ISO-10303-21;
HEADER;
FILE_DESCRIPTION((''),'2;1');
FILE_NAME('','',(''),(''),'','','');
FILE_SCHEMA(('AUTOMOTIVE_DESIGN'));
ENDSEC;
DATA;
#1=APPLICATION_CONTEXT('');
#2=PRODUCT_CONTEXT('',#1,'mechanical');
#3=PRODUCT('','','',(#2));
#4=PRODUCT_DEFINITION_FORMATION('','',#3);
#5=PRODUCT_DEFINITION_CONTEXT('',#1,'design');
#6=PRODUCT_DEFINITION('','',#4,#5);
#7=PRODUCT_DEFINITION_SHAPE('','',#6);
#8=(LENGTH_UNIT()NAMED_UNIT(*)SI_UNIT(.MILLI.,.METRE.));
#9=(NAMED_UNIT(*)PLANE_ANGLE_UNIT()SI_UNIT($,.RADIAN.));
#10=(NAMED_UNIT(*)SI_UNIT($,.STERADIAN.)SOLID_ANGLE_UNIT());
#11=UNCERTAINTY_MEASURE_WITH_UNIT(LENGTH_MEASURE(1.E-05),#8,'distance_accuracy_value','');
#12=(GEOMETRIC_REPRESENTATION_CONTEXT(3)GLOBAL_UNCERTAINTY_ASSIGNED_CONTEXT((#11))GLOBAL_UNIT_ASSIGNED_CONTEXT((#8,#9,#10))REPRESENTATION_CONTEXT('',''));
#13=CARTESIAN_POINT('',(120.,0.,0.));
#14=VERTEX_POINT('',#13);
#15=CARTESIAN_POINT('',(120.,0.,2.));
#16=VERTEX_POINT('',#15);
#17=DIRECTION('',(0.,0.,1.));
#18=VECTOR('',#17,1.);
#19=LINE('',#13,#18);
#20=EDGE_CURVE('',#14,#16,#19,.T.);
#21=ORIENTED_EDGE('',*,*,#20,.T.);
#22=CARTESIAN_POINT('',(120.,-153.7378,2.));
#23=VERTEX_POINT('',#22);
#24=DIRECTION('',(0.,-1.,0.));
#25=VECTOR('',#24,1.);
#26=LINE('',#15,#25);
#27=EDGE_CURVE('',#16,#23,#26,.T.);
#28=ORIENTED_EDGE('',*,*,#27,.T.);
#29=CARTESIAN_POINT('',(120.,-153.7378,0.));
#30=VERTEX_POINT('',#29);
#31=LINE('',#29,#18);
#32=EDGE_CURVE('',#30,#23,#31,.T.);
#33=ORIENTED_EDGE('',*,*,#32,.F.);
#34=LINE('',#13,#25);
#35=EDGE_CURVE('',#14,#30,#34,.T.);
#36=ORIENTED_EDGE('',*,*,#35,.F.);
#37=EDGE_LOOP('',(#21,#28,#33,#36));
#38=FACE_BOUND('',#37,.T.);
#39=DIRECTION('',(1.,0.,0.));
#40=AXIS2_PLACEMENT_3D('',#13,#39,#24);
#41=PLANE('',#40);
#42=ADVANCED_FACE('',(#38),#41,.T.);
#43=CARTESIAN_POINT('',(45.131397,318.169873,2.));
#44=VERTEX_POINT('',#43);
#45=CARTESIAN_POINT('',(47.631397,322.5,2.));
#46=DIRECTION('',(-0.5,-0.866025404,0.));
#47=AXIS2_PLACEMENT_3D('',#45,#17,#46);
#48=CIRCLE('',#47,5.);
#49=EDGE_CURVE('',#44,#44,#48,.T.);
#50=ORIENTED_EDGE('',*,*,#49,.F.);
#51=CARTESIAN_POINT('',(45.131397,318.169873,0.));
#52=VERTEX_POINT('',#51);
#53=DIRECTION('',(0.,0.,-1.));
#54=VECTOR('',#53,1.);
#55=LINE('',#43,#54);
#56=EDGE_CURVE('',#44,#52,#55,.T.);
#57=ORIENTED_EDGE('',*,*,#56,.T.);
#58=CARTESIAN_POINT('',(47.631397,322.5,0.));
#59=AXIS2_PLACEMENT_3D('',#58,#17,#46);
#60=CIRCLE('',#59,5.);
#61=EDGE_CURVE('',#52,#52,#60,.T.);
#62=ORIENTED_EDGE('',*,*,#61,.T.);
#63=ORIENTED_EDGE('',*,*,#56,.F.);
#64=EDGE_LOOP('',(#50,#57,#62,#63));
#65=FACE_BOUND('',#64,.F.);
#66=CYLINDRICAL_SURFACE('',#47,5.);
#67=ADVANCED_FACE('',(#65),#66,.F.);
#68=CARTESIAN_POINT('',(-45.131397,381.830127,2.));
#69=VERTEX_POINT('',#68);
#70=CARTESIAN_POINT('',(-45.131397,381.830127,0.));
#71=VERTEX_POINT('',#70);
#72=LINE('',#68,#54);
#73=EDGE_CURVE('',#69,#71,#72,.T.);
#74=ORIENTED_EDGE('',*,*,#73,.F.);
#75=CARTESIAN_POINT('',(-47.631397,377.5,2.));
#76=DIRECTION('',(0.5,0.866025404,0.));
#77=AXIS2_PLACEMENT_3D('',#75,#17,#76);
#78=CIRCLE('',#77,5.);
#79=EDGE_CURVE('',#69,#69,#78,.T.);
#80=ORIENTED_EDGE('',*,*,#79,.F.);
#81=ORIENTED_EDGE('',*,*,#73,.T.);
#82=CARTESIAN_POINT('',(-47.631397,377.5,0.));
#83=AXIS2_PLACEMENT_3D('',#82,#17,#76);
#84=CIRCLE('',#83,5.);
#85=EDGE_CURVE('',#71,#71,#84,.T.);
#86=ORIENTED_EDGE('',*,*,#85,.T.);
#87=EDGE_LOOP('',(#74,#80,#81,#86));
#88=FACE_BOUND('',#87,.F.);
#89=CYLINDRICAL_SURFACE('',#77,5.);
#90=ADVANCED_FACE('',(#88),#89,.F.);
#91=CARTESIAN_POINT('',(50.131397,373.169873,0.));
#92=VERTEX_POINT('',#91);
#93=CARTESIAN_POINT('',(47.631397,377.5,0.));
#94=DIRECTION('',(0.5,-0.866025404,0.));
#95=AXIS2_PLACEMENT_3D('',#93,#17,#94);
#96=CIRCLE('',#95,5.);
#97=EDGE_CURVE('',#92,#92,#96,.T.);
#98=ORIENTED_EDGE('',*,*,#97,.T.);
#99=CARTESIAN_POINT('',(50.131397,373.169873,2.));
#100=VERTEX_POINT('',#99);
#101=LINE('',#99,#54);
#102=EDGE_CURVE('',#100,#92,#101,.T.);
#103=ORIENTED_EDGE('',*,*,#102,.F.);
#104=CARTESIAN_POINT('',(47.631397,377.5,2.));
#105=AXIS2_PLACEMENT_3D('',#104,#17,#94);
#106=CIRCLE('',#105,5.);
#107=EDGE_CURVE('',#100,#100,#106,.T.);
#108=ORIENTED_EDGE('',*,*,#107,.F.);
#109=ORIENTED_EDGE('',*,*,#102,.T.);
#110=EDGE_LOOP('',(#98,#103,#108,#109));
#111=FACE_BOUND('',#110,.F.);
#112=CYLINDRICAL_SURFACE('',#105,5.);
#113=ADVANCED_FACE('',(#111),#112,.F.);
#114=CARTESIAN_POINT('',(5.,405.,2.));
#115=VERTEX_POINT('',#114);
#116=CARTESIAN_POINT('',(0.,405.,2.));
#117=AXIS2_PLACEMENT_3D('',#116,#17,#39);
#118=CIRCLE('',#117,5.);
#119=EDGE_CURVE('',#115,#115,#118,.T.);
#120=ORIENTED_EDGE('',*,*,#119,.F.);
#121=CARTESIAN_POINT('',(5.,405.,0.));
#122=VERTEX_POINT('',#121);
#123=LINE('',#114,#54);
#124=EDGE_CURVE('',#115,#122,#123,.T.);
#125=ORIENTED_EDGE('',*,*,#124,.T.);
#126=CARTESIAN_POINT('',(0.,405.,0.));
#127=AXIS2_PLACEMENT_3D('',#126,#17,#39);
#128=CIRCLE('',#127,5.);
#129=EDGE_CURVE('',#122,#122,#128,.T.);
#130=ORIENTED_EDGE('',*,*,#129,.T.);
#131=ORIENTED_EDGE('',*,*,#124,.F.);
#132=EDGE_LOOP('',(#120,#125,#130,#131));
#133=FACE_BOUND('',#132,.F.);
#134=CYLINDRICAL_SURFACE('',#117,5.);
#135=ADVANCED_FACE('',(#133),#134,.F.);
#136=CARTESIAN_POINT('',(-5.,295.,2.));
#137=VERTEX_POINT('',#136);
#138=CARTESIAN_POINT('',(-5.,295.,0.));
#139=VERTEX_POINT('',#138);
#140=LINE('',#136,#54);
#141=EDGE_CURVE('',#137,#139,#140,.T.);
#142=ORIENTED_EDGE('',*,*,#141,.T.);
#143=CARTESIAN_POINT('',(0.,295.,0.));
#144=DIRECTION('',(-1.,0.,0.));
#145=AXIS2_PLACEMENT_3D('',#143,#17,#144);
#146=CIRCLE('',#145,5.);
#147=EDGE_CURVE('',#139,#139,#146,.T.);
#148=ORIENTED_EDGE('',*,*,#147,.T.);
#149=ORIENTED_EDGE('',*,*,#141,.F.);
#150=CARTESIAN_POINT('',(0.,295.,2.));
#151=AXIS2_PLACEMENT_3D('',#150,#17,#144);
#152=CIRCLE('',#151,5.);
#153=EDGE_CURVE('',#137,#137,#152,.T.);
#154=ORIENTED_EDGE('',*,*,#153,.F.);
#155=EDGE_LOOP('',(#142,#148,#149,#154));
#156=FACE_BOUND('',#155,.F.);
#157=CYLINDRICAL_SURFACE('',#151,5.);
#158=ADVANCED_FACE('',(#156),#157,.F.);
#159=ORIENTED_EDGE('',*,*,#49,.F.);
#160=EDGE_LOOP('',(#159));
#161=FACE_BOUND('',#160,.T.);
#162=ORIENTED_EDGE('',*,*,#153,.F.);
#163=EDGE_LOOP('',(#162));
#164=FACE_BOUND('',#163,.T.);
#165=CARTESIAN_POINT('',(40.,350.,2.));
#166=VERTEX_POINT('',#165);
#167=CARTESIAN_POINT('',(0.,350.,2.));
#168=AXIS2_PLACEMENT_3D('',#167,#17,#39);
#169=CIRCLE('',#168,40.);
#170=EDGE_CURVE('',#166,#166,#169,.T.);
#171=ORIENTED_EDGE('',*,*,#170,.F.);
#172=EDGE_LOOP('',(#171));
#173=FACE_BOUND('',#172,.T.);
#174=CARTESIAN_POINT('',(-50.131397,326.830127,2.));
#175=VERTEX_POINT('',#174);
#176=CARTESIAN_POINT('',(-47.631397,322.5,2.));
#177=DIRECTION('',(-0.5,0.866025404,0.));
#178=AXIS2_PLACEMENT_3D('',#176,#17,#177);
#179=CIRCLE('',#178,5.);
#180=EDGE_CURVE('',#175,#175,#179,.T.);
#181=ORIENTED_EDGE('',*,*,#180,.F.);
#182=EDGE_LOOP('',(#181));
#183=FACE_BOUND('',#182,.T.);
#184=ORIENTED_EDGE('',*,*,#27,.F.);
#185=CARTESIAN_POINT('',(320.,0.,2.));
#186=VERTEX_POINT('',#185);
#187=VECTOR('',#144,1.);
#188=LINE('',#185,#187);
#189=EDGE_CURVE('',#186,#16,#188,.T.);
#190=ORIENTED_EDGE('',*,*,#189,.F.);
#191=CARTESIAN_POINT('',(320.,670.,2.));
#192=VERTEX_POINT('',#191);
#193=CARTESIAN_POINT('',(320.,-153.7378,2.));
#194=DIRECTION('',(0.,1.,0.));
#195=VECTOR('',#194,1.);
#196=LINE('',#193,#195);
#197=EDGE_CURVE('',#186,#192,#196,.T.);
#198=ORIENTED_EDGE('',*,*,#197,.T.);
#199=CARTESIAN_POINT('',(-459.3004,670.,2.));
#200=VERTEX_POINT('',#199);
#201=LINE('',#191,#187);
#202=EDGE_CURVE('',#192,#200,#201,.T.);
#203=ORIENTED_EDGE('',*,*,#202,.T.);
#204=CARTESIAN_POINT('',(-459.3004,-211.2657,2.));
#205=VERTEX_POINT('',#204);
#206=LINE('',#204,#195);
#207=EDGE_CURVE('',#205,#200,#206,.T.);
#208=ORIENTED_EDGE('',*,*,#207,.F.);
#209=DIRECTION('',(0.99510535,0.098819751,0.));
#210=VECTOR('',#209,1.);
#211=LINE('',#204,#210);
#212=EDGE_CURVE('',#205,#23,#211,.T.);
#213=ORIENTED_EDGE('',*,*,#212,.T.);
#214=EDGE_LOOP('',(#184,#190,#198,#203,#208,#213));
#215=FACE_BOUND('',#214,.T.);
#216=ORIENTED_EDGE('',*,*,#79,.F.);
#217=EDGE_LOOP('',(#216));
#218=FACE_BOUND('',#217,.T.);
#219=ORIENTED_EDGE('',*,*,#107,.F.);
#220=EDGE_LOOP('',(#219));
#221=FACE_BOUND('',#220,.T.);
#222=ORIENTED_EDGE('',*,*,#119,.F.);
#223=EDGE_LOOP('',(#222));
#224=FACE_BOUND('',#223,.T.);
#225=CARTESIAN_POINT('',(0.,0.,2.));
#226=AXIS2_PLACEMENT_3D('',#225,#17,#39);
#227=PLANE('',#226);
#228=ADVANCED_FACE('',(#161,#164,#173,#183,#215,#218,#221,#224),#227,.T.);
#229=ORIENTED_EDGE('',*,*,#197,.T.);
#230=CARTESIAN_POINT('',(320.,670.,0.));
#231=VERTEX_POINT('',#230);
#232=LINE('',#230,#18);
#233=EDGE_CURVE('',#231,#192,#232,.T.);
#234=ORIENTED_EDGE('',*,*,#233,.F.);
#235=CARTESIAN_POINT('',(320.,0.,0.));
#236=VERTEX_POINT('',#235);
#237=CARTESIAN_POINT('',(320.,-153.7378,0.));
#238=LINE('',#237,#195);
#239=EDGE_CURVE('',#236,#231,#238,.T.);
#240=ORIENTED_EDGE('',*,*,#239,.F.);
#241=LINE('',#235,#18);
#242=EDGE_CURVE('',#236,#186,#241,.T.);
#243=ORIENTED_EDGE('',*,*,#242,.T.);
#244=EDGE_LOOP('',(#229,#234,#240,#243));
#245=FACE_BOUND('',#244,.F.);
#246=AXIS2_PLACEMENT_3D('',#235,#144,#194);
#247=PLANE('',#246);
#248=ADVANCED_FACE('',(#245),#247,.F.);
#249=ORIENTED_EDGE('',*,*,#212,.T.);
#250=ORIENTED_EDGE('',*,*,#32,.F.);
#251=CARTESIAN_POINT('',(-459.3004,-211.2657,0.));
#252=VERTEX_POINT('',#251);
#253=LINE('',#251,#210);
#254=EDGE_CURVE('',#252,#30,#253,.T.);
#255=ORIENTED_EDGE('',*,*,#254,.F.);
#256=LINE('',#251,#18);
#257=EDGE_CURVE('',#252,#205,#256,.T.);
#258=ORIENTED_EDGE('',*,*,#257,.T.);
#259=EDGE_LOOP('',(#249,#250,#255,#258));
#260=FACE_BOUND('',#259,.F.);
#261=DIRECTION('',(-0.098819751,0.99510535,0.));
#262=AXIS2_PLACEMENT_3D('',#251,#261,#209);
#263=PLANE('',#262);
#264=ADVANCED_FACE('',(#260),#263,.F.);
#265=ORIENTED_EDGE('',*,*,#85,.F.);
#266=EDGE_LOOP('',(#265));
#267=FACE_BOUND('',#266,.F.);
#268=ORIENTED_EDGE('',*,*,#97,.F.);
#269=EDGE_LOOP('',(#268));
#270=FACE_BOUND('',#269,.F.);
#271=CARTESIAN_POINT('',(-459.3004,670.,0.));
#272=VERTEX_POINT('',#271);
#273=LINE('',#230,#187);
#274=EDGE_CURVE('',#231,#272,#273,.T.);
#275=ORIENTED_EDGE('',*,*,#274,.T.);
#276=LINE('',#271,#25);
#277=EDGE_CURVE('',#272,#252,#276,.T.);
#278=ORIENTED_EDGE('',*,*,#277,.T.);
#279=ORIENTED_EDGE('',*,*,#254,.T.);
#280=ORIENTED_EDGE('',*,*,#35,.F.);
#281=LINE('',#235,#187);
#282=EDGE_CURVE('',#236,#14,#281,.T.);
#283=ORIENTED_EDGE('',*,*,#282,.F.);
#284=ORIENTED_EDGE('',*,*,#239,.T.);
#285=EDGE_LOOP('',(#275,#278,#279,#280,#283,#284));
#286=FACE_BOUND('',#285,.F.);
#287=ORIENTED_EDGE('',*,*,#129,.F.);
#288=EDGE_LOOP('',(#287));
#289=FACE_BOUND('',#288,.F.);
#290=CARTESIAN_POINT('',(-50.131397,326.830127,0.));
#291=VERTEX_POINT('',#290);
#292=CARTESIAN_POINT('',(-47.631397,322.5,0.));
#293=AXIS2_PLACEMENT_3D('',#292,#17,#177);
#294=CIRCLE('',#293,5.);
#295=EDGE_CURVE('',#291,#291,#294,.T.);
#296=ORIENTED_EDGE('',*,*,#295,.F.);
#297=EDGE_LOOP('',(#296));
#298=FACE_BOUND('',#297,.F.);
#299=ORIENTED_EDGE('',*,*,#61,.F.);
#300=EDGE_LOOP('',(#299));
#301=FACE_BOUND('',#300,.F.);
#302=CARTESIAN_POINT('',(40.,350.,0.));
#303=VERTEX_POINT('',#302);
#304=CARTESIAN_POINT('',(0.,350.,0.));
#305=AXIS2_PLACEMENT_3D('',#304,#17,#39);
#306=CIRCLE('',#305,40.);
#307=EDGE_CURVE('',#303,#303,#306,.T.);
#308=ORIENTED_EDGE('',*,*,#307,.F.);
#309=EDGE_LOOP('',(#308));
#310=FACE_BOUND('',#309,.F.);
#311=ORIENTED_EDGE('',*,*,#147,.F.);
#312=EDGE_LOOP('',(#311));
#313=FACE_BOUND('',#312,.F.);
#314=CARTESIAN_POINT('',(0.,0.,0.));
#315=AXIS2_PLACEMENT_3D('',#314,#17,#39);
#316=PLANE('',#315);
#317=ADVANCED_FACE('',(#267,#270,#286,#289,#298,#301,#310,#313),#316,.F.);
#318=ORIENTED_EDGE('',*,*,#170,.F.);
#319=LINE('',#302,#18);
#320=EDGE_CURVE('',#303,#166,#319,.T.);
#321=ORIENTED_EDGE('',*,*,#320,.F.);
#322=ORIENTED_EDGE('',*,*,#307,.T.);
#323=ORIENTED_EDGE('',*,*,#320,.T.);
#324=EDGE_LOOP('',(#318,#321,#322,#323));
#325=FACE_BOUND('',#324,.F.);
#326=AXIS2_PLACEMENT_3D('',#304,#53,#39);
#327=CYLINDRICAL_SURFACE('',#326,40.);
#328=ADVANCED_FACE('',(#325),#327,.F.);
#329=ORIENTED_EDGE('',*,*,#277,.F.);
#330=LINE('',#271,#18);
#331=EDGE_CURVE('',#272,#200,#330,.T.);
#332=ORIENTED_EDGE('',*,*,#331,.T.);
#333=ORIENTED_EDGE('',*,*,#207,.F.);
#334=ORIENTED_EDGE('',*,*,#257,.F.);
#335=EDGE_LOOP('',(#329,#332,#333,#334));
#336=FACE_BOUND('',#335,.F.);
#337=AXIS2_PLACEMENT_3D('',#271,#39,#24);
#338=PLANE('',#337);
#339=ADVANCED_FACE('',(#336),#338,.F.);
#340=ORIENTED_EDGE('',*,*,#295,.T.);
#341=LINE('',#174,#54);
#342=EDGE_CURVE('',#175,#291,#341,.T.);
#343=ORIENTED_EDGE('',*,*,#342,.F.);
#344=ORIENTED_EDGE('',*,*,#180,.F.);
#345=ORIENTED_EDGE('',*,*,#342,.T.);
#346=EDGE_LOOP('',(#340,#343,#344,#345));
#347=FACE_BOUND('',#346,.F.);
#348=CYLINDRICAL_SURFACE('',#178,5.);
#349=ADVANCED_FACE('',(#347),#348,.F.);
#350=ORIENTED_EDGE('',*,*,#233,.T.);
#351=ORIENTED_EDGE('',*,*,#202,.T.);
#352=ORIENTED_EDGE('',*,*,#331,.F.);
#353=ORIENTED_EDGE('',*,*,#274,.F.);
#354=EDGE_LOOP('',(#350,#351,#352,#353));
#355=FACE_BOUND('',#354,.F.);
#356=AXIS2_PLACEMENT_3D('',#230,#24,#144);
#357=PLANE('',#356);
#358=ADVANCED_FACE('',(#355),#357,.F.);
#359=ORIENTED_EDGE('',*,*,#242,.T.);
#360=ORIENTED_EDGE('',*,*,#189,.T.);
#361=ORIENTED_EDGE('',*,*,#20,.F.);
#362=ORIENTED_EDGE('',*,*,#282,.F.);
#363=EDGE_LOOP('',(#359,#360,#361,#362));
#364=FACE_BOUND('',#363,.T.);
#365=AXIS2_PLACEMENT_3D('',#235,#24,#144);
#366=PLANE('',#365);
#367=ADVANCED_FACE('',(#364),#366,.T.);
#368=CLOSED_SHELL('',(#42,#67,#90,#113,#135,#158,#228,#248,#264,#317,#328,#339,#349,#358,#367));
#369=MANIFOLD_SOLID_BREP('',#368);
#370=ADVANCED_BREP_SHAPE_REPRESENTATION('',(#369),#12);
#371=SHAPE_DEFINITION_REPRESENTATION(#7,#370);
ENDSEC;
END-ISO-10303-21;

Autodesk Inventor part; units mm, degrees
ref_plane "YZ Plane" through (0, 0, 0) normal (1, 0, 0) x (0, 1, 0)
ref_plane "XZ Plane" through (0, 0, 0) normal (0, 1, 0) x (-1, 0, 0)
ref_plane "XY Plane" through (0, 0, 0) normal (0, 0, 1) x (1, 0, 0)
sketch "Sketch1" plane through (0, 0, 0) normal (0, 0, 1) x (1, 0, 0)
  line L0 (-459.3004, -153.7378) -> (320, -153.7378)
  line L1 (320, -153.7378) -> (320, 670)
  line L2 (320, 670) -> (-459.3004, 670)
  line L3 (-459.3004, 670) -> (-459.3004, -153.7378)
  line L4 (120, -153.7378) -> (320, 0)
  circle A0 centre (0, 350) radius 40
  line L5 (320, 0) -> (120, 0)
  line L6 (120, 0) -> (120, -153.7378)
  line L7 (-459.3004, -153.7378) -> (-459.3004, -211.2657)
  line L8 (-459.3004, -211.2657) -> (120, -153.7378)
  point P0 (0, 0)
  dimension "d14" = 80
  dimension "d15" = 320
  dimension "d16" = 200
  dimension "d17" = 320
  dimension "d18" = 350
extrude "Plate1" add sketch "Sketch1" along normal blind 2 contours L3 L2 L1 L5 L6 L0 | L0 L8 L7
sketch "Sketch2" plane through (0, 0, 0) normal (0, 0, -1) x (-1, 0, 0)
  line L0 (-300, 650) -> (-100, 650) construction
  line L1 (-100, 650) -> (-100, 630) construction
  line L2 (-100, 630) -> (-300, 630) construction
  line L3 (-300, 630) -> (-300, 650) construction
  line L4 (-320, 670) -> (459.3004, 670) projected
  line L5 (-320, 0) -> (-320, 670) projected
  point P0 (0, 0)
  point P1 (-48, 100)
  point P2 (459.3004, 670)
  point P3 (-251, -525)
  point P4 (-50, 98)
  dimension "d6" = 200
  dimension "d9" = 20
  dimension "d10" = 20
  dimension "d11" = 20
mark "Mark1"
sketch "Sketch3" plane through (0, 0, 2) normal (0, 0, 1) x (1, 0, 0)
  circle A0 centre (0, 405) radius 5
  circle A1 centre (0, 350) radius 40 projected
  point P0 (0, 0)
  dimension "d19" = 10
  dimension "d20" = 55
extrude "Cut1" cut sketch "Sketch3" against normal through all contours A0
pattern_circular "Circular Pattern1" count 6 over 360 about axis through (0, 350, 0) along (0, 0, 1) of "Cut1"
equation "\"d2\" = Thickness"
equation "\"BendReliefWidth\" = Thickness"
equation "\"BendReliefDepth\" = 0.5 * Thickness"
equation "\"CornerReliefSize\" = 4 * Thickness"
equation "\"MinimumRemnant\" = 2 * Thickness"
equation "\"TransitionRadius\" = BendRadius"
equation "\"JacobiRadiusSize\" = BendRadius"
equation "\"GapSize\" = Thickness"
equation "\"Thickness\" = 2"
equation "\"BendRadius\" = 2.75"
properties part number "TRM 016 right board main+" material "AISI 304"
